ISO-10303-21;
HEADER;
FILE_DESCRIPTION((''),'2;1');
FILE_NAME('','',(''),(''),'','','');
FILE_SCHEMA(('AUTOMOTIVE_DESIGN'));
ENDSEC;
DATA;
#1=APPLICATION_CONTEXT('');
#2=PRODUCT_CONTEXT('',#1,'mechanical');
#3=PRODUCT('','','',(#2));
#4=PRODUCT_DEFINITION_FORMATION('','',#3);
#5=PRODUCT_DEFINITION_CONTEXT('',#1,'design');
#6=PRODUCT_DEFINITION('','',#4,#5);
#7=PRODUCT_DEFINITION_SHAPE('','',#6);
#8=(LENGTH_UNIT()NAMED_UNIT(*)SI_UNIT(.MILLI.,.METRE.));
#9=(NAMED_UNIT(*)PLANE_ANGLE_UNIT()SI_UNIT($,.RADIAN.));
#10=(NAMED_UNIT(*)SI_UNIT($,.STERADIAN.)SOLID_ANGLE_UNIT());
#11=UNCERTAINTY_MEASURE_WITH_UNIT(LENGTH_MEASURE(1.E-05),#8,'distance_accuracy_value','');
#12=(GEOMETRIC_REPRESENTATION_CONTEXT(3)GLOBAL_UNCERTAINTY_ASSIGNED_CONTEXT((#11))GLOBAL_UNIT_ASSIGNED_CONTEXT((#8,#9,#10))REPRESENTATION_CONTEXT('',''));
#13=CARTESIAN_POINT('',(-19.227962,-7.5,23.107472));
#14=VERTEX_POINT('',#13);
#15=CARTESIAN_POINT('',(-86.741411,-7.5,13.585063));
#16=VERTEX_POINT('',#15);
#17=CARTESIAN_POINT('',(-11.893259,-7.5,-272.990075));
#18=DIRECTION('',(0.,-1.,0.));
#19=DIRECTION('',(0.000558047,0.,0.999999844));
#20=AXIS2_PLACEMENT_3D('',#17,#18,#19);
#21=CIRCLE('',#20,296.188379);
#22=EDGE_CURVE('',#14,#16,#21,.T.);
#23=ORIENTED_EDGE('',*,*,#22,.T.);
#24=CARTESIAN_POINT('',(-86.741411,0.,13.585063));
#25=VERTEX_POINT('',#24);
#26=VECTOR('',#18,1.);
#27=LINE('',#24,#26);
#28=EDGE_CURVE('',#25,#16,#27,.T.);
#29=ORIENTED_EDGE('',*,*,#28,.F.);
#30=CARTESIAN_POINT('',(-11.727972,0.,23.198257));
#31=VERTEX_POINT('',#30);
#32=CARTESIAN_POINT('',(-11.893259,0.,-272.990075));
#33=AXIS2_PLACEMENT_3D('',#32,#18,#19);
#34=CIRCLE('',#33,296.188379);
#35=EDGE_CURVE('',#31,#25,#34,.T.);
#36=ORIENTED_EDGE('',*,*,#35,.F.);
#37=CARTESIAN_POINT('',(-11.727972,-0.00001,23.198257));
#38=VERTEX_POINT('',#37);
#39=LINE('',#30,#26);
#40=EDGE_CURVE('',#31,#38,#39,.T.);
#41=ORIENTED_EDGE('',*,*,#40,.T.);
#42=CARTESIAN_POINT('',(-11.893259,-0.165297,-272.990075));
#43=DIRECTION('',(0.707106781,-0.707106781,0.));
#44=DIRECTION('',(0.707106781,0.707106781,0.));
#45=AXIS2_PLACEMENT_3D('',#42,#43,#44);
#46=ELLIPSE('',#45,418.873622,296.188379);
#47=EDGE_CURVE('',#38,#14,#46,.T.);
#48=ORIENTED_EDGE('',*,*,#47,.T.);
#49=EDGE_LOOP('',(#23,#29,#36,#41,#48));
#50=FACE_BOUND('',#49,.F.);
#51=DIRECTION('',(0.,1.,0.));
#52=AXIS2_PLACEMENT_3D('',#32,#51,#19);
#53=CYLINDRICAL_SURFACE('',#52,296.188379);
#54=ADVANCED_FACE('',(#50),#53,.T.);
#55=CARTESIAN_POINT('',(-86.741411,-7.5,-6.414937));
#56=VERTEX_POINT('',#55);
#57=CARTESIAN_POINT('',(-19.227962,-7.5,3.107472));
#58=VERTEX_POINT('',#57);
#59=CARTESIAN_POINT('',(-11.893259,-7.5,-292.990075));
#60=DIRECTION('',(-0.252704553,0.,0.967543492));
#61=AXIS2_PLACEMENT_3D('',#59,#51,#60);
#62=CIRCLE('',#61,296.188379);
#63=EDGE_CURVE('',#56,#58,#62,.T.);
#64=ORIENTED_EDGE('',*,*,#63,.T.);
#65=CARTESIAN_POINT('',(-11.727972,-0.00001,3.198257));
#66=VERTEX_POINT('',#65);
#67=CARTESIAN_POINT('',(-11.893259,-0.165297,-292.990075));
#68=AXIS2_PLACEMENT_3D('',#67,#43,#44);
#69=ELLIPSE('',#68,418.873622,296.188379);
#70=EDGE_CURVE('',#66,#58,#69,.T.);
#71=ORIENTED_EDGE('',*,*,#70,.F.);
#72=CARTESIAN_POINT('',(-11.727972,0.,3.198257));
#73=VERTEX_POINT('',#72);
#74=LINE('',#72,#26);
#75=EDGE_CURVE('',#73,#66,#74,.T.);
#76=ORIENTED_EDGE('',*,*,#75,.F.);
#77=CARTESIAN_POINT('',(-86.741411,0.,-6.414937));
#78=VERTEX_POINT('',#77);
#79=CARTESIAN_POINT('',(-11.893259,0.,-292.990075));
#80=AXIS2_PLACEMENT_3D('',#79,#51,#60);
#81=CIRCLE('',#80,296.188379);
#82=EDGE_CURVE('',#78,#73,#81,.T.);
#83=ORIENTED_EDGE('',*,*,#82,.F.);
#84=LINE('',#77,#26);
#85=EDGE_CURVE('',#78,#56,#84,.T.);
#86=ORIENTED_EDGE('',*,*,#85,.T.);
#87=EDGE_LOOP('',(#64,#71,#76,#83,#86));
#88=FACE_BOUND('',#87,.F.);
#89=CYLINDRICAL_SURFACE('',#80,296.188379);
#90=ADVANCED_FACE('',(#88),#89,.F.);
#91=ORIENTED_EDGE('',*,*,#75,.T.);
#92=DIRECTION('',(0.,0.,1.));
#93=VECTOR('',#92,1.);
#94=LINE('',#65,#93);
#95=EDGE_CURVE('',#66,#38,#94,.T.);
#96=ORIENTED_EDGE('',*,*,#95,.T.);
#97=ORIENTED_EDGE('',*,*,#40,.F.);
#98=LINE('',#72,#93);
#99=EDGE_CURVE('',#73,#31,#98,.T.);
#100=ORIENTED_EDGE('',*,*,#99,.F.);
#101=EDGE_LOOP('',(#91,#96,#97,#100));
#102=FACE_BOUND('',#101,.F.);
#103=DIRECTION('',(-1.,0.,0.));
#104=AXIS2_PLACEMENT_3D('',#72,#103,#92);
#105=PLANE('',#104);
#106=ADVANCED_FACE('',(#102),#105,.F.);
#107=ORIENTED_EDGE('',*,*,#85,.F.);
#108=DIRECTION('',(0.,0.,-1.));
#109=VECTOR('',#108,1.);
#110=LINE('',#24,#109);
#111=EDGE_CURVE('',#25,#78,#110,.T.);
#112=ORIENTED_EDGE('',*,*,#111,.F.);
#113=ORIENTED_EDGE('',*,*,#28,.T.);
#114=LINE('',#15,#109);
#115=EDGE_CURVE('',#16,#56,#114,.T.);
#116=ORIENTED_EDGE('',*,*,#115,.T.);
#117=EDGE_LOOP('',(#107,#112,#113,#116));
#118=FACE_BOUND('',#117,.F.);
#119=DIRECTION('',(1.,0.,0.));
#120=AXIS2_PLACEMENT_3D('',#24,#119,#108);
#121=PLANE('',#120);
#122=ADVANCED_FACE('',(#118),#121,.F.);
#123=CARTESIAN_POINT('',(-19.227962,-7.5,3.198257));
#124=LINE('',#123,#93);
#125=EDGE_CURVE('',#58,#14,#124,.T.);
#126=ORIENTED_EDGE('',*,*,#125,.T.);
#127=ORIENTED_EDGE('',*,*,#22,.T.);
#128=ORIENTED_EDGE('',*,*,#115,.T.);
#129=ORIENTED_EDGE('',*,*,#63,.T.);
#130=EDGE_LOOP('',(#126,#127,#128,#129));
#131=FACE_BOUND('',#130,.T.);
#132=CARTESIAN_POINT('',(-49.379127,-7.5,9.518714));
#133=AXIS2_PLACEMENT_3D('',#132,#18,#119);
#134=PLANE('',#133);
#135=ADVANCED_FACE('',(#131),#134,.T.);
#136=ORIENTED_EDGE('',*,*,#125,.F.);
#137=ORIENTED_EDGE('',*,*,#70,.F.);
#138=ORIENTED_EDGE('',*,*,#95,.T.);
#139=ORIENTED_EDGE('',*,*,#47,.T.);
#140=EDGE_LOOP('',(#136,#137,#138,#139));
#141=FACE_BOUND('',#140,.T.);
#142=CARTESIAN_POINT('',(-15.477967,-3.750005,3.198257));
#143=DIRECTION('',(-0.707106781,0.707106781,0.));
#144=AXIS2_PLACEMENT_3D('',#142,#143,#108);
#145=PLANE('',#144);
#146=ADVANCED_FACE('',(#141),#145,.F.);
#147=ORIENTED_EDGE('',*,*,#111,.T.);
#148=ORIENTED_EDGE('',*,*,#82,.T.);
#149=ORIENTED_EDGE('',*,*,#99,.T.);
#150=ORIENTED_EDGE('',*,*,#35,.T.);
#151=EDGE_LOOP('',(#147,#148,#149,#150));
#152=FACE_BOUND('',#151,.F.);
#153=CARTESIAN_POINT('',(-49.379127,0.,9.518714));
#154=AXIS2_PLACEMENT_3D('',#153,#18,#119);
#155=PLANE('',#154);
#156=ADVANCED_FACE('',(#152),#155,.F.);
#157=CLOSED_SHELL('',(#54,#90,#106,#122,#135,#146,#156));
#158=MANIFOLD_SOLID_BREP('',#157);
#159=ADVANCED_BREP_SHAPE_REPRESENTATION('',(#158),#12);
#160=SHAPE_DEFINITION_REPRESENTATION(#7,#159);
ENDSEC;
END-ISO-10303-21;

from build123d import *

# Parameters (mm, degrees)
F1_DEPTH = 7.5
F2_SIZE  = 7.49999


# Not quite as in the source:
# - a fillet or chamfer is up to 0.001 mm smaller than in the source, because OpenCascade refuses the exact size


with BuildPart() as f1:
    # F0 (on Front) → F1 (new body)
    with BuildSketch(Plane.XZ):
        with BuildLine():
            Line((-86.7414106019, 13.5850626232), (-86.7414106019, -6.4149373768))
            ThreePointArc((-86.7414106019, -6.4149373768), (-49.5427734858, 0.7956791903), (-11.7279719579, 3.1982569702))
            Line((-11.7279719579, 3.1982569702), (-11.7279719579, 23.1982569702))
            ThreePointArc((-11.7279719579, 23.1982569702), (-49.5427734858, 20.7956791903), (-86.7414106019, 13.5850626232))
        make_face()
    extrude(amount=F1_DEPTH)

    # F2 (size 7.5 in the source; OpenCascade refuses exactly that, so slightly less here)
    f2_edges = [f1.edges().sort_by_distance(p)[0] for p in [
        (-11.727972, -7.5, 13.198257),
    ]]
    chamfer(f2_edges, length=F2_SIZE)


solid = f1.part
